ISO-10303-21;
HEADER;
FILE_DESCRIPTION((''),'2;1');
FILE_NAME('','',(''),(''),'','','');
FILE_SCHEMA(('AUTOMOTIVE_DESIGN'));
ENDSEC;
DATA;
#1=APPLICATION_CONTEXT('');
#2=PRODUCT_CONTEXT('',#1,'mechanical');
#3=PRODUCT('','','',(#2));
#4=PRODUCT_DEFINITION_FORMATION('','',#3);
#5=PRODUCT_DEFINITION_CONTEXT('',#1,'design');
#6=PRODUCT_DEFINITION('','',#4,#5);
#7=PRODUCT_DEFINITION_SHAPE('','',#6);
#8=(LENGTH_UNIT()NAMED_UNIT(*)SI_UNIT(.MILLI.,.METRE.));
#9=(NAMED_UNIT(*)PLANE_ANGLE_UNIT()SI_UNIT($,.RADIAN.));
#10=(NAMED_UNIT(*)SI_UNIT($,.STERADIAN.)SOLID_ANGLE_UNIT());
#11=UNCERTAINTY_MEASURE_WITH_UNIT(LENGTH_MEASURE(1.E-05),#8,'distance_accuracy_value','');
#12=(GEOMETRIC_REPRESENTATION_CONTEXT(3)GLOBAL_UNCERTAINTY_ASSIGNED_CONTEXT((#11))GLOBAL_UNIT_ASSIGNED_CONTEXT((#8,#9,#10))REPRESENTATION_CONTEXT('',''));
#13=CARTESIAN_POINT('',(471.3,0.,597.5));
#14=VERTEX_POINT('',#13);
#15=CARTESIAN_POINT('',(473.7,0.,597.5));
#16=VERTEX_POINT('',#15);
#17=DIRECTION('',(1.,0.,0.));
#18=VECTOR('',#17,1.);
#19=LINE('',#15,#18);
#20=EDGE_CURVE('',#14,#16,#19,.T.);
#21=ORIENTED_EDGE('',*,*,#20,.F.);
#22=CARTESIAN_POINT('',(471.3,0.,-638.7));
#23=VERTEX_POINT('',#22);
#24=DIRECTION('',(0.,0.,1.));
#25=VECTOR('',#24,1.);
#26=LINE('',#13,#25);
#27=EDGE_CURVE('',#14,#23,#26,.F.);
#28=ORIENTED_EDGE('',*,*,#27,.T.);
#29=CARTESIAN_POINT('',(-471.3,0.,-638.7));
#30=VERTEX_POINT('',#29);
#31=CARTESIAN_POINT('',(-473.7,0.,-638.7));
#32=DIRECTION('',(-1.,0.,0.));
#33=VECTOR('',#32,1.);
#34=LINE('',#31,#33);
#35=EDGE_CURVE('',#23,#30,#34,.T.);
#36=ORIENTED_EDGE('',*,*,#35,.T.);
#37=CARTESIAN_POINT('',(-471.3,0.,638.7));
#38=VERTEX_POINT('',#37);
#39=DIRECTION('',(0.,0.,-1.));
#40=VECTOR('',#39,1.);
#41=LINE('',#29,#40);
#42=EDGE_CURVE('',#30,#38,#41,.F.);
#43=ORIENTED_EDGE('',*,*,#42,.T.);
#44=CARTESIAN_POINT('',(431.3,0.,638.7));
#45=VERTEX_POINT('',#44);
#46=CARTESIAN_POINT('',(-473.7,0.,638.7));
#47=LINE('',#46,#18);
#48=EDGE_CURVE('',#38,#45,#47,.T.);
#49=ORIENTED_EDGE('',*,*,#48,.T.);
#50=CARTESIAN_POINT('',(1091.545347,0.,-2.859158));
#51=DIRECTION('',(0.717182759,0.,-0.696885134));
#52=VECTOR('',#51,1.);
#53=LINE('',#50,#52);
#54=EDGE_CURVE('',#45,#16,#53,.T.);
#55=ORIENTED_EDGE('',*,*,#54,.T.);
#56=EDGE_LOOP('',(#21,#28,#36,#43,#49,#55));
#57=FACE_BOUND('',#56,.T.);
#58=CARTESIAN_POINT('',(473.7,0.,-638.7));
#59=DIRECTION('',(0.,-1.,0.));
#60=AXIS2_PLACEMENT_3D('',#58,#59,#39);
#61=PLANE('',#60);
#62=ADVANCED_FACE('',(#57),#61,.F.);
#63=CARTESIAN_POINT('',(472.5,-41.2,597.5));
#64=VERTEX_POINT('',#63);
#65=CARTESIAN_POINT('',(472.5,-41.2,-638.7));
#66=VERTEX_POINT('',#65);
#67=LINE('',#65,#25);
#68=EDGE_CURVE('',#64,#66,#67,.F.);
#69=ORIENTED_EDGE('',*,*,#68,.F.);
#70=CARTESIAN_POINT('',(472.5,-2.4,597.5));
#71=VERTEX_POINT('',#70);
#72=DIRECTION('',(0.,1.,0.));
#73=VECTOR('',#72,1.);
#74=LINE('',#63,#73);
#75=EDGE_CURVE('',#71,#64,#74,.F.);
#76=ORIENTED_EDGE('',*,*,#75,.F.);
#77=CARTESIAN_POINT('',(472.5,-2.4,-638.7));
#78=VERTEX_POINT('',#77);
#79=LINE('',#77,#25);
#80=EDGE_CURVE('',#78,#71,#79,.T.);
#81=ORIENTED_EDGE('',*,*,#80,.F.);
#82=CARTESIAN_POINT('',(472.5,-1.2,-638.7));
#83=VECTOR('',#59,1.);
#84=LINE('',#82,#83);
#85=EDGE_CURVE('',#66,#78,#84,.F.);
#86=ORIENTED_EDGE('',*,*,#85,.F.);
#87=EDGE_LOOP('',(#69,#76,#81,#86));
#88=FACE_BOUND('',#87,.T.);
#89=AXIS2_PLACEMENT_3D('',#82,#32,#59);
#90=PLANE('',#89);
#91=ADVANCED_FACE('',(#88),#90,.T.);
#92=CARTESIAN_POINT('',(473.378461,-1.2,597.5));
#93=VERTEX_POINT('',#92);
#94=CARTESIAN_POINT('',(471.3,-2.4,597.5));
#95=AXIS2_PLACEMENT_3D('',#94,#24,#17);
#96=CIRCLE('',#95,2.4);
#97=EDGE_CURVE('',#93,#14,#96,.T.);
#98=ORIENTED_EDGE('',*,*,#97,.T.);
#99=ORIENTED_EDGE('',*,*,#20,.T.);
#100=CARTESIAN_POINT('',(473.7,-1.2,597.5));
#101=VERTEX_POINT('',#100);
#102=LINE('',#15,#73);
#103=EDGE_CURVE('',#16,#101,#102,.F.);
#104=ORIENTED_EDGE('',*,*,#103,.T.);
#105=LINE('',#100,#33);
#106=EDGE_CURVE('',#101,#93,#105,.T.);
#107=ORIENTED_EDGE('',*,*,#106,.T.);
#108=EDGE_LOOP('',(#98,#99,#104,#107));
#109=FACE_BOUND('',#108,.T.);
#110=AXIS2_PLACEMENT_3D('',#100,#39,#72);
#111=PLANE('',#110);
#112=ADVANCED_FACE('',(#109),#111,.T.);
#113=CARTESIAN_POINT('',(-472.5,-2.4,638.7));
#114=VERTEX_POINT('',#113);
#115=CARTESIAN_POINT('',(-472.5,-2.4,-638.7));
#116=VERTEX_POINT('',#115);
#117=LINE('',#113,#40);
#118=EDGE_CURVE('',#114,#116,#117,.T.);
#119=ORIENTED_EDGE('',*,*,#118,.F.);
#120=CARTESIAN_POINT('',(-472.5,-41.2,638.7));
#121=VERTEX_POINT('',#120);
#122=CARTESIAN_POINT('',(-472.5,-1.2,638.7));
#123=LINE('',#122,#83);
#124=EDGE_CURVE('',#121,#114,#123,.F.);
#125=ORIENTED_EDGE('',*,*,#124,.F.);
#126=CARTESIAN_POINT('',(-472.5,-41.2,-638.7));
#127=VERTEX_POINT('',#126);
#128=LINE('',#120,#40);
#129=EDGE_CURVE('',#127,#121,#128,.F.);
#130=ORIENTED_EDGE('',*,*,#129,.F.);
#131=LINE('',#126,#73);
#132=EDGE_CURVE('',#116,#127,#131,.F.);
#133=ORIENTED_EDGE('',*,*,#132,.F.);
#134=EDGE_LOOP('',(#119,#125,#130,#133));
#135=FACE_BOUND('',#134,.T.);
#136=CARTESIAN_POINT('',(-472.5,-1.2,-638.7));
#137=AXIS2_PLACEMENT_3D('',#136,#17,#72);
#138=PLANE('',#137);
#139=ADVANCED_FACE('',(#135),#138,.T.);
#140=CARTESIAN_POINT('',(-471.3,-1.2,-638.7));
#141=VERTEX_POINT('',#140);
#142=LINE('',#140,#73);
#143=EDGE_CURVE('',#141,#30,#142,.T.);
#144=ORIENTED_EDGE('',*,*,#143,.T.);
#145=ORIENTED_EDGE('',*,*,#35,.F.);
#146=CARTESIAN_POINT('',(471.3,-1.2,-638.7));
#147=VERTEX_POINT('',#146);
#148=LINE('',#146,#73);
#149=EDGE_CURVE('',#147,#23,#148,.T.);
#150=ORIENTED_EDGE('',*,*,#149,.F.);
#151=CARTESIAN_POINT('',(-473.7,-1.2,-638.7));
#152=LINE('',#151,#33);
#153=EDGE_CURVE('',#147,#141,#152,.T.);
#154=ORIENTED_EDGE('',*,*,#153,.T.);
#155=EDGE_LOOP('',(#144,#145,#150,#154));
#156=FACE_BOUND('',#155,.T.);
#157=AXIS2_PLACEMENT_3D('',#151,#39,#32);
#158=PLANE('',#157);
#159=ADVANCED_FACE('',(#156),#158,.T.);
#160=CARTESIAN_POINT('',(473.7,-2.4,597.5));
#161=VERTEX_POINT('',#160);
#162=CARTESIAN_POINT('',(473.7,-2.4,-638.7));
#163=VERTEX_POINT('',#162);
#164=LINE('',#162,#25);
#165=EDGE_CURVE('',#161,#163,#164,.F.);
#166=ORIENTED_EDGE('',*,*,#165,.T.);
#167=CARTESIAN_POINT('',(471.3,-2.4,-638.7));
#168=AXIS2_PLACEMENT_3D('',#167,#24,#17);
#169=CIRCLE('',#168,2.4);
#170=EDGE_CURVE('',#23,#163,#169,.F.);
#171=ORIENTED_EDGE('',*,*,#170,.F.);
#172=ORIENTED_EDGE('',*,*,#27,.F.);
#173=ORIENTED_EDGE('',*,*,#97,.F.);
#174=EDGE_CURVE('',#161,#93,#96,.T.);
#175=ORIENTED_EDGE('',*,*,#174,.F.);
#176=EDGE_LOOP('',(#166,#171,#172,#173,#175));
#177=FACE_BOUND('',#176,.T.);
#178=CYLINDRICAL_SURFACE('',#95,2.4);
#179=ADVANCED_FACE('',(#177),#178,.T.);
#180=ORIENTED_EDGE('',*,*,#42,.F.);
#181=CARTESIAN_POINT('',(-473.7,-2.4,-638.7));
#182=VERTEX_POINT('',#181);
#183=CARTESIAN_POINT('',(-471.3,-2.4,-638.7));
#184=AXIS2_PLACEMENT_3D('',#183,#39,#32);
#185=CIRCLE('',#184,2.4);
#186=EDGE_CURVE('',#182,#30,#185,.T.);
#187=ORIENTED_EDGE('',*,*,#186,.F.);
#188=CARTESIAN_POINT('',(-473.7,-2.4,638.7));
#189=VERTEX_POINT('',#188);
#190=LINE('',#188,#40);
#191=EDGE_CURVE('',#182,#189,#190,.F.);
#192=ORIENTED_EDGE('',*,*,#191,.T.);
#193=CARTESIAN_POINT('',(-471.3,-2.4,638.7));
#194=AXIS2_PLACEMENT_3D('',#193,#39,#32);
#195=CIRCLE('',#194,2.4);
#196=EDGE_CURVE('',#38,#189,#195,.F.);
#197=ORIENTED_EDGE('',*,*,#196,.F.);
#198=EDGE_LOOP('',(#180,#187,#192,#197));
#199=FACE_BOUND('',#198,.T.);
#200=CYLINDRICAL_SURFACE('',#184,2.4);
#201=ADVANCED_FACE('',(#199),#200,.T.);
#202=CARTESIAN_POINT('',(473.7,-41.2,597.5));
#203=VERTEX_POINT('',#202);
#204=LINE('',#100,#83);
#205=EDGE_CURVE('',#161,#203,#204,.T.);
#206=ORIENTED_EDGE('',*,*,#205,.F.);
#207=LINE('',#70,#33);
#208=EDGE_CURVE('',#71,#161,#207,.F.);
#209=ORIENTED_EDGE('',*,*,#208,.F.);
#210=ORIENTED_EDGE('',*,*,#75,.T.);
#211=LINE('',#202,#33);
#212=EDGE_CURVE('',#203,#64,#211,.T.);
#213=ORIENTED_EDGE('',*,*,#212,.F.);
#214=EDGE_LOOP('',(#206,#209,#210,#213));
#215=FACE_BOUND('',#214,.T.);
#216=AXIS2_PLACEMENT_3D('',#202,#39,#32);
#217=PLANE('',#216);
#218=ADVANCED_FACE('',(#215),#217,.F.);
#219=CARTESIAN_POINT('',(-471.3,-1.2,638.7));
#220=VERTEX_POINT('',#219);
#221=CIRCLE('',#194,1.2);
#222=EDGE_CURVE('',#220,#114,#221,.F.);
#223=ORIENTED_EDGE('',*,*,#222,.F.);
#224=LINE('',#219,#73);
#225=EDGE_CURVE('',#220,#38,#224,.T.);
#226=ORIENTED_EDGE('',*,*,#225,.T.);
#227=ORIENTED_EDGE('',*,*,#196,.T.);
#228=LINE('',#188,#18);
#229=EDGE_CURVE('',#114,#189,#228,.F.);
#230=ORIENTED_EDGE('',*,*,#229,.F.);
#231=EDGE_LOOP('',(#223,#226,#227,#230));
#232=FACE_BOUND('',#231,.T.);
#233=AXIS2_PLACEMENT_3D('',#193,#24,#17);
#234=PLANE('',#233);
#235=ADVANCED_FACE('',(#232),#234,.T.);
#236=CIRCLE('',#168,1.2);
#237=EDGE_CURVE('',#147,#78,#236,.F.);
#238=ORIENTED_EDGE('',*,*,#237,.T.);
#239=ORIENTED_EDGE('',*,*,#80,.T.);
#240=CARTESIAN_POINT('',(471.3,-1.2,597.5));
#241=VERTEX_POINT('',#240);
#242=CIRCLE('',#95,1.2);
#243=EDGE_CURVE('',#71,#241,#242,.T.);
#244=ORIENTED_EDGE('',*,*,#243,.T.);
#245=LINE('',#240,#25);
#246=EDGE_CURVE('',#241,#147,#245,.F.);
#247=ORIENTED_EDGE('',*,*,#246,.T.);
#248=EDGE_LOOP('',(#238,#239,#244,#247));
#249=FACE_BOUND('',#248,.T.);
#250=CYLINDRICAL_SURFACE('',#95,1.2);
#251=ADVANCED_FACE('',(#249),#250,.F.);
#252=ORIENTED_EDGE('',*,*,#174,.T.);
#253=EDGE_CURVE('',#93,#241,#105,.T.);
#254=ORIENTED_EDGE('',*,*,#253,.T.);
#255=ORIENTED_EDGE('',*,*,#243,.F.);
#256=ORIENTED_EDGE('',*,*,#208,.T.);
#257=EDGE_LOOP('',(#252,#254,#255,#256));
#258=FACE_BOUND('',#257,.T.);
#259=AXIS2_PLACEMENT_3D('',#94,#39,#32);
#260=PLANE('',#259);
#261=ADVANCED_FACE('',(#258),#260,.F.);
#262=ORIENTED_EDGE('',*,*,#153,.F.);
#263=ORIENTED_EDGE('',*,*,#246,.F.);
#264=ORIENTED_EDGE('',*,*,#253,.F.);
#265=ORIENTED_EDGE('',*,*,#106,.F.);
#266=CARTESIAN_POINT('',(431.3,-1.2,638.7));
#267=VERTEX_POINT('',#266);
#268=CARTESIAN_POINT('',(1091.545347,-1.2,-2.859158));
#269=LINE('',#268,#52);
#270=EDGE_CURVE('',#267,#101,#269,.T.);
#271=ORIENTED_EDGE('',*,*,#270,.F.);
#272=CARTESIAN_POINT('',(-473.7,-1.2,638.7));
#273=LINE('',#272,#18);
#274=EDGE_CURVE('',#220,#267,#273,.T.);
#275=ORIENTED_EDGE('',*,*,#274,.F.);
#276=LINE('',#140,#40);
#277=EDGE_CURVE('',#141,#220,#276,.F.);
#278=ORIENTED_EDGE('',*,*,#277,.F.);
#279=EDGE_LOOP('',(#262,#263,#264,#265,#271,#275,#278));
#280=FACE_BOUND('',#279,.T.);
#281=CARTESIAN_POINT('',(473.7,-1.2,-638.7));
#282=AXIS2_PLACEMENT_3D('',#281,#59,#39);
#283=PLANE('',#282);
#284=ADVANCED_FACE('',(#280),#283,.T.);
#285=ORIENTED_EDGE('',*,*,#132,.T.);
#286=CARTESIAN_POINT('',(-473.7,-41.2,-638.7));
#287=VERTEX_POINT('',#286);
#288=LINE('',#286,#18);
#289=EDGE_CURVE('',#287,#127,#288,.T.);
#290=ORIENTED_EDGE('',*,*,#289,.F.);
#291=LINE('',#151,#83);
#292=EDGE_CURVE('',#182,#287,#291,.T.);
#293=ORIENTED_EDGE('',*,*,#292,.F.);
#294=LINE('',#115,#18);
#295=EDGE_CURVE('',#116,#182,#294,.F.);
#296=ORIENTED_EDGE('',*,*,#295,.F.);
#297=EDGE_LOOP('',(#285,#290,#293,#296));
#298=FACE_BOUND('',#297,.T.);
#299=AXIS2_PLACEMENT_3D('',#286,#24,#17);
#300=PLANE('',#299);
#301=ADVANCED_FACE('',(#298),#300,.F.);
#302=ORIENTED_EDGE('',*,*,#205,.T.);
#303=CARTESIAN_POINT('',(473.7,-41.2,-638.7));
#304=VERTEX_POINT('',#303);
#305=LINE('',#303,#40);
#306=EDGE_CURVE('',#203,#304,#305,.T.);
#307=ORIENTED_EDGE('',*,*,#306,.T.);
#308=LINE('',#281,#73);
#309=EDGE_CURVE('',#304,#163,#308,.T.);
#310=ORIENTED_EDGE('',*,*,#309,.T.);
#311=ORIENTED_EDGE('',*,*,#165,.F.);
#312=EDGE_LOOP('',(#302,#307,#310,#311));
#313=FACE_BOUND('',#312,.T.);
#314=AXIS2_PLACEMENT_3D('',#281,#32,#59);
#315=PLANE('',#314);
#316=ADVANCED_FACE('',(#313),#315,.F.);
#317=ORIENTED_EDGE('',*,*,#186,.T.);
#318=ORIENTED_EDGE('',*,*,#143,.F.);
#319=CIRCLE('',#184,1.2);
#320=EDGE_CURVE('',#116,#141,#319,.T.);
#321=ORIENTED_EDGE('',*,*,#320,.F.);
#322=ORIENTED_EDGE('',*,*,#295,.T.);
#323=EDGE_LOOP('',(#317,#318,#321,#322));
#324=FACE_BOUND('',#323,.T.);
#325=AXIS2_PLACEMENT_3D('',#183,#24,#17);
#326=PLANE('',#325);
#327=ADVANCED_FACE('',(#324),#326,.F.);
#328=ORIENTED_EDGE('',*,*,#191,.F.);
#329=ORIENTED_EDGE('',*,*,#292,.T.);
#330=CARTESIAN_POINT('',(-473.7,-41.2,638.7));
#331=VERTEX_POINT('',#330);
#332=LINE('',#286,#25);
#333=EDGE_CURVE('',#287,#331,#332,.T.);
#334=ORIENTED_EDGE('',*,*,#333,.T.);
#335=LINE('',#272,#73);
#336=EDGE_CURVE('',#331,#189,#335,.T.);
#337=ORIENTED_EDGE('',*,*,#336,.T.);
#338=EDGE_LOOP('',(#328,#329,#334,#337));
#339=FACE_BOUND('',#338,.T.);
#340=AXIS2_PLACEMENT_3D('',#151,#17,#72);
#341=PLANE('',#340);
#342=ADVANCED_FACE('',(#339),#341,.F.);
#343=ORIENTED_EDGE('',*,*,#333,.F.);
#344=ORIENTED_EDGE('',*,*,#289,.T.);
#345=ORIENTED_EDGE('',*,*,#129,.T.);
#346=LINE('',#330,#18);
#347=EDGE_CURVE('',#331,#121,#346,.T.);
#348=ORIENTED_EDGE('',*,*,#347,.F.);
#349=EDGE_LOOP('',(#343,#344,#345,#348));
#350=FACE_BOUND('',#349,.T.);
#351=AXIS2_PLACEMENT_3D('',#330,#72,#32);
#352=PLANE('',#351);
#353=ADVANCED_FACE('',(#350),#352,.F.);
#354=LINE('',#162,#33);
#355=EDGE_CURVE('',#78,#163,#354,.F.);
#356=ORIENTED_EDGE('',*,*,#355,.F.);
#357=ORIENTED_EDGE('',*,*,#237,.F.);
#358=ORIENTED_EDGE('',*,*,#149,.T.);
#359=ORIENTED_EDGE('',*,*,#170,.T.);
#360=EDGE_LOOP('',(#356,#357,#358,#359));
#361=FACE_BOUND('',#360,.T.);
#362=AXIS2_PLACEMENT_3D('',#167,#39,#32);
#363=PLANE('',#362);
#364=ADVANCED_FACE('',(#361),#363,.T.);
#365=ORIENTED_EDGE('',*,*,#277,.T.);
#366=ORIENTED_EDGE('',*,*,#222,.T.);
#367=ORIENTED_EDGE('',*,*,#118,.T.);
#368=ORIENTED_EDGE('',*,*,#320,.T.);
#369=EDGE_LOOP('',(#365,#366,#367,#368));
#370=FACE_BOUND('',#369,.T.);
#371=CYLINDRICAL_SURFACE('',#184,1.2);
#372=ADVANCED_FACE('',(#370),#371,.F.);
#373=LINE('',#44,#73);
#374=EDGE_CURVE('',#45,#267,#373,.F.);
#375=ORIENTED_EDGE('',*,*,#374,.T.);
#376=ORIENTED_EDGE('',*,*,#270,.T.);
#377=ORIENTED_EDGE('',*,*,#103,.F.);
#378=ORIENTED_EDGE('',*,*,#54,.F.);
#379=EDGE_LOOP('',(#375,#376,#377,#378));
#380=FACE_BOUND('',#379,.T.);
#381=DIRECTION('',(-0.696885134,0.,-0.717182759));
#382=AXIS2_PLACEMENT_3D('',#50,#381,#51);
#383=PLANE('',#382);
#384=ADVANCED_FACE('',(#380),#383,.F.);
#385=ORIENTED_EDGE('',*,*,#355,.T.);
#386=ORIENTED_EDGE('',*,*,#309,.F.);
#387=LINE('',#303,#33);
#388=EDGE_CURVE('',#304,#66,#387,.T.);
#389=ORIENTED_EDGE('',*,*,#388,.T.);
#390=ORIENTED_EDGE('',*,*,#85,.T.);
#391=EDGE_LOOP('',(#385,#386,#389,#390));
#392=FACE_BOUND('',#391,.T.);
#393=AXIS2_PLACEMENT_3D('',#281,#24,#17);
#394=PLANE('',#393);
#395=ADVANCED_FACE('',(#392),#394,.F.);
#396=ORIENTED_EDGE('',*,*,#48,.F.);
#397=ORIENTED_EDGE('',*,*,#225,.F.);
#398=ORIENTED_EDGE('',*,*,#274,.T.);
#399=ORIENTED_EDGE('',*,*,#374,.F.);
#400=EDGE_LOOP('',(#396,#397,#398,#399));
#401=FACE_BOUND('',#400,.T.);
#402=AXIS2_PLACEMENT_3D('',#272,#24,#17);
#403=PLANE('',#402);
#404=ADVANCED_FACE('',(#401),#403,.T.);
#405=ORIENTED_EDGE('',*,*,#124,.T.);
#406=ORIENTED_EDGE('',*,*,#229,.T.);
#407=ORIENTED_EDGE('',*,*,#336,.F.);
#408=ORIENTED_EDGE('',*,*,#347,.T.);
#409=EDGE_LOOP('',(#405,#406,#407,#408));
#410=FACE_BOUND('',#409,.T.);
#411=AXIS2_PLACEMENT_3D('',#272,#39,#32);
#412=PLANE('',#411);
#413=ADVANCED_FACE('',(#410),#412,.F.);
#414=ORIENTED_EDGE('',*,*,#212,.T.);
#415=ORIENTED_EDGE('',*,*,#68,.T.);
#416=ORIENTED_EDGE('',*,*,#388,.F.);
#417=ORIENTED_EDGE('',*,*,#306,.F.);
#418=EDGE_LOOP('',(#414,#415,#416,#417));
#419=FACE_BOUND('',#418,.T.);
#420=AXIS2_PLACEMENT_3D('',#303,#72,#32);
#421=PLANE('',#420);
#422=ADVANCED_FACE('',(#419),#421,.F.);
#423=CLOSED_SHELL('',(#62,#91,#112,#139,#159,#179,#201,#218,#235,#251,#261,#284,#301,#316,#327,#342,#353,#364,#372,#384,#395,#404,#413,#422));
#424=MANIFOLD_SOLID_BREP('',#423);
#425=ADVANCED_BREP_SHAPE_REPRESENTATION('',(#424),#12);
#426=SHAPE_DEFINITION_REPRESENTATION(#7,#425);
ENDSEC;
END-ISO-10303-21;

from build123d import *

# Parameters (mm, degrees)
SKETCH1_W                      = 947.4
SKETCH1_H                      = 1277.4
BASE_FLANGE1_DEPTH             = 1.2
CUT_EXTRUDE1_DEPTH             = 10
EDGE_FLANGE1_STRIP_W           = 7.2
EDGE_FLANGE1_STRIP_H           = 1.2
EDGE_FLANGE1_STRIP_CUT_DEPTH   = 1236.2
EDGE_FLANGE1_STRIP_2_W         = 7.2
EDGE_FLANGE1_STRIP_2_H         = 1.2
EDGE_FLANGE1_STRIP_CUT_2_DEPTH = 1277.4
EDGE_FLANGE1_DEPTH             = 1236.2
EDGE_FLANGE1_BEND_DEPTH        = 1277.4


# Sheet-metal steps are written as plain solids
with BuildPart() as part:
    # Sketch1 → Base-Flange1 (new body)
    with BuildSketch(Plane(origin=(0, 0, 0), x_dir=(1, 0, 0), z_dir=(0, 1, 0))):
        Rectangle(SKETCH1_W, SKETCH1_H)
    extrude(amount=-BASE_FLANGE1_DEPTH)

    # Sketch3 → Cut-Extrude1 (cut)
    with BuildSketch(Plane.XZ.offset(1.2)):
        Polygon((431.3, 638.7), (512.405547978, 658.605547978), (473.7, 597.5), align=None)
    extrude(amount=-CUT_EXTRUDE1_DEPTH, mode=Mode.SUBTRACT)

    # Edge-Flange1 strip (across the edge) → Edge-Flange1 strip cut (cut)
    with BuildSketch(Plane(origin=(473.7, -1.2, -638.7), x_dir=(-1, 0, 0), z_dir=(0, 0, 1))):
        with Locations((-1.2, -0.6)):
            Rectangle(EDGE_FLANGE1_STRIP_W, EDGE_FLANGE1_STRIP_H)
    extrude(amount=EDGE_FLANGE1_STRIP_CUT_DEPTH, mode=Mode.SUBTRACT)

    # Edge-Flange1 strip 2 (across the edge) → Edge-Flange1 strip cut 2 (cut)
    with BuildSketch(Plane(origin=(-473.7, -1.2, 638.7), x_dir=(1, 0, 0), z_dir=(0, 0, -1))):
        with Locations((-1.2, -0.6)):
            Rectangle(EDGE_FLANGE1_STRIP_2_W, EDGE_FLANGE1_STRIP_2_H)
    extrude(amount=EDGE_FLANGE1_STRIP_CUT_2_DEPTH, mode=Mode.SUBTRACT)

    # Edge-Flange1 section (across the edge) → Edge-Flange1 (add)
    with BuildSketch(Plane(origin=(473.7, -1.2, -638.7), x_dir=(-1, 0, 0), z_dir=(0, 0, 1))):
        with BuildLine():
            Line((0, 1.2), (0, 40))
            Line((0, 40), (1.2, 40))
            Line((1.2, 40), (1.2, 1.2))
            ThreePointArc((1.2, 1.2), (1.551471863, 0.351471863), (2.4, 0))
            Line((2.4, 0), (2.4, -1.2))
            ThreePointArc((2.4, -1.2), (0.702943725, -0.497056275), (0, 1.2))
        make_face()
    extrude(amount=EDGE_FLANGE1_DEPTH)

    # Edge-Flange1 section 2 (across the edge) → Edge-Flange1 bend (add)
    with BuildSketch(Plane(origin=(-473.7, -1.2, 638.7), x_dir=(1, 0, 0), z_dir=(0, 0, -1))):
        with BuildLine():
            Line((0, 1.2), (0, 40))
            Line((0, 40), (1.2, 40))
            Line((1.2, 40), (1.2, 1.2))
            ThreePointArc((1.2, 1.2), (1.551471863, 0.351471863), (2.4, 0))
            Line((2.4, 0), (2.4, -1.2))
            ThreePointArc((2.4, -1.2), (0.702943725, -0.497056275), (0, 1.2))
        make_face()
    extrude(amount=EDGE_FLANGE1_BEND_DEPTH)


solid = part.part
